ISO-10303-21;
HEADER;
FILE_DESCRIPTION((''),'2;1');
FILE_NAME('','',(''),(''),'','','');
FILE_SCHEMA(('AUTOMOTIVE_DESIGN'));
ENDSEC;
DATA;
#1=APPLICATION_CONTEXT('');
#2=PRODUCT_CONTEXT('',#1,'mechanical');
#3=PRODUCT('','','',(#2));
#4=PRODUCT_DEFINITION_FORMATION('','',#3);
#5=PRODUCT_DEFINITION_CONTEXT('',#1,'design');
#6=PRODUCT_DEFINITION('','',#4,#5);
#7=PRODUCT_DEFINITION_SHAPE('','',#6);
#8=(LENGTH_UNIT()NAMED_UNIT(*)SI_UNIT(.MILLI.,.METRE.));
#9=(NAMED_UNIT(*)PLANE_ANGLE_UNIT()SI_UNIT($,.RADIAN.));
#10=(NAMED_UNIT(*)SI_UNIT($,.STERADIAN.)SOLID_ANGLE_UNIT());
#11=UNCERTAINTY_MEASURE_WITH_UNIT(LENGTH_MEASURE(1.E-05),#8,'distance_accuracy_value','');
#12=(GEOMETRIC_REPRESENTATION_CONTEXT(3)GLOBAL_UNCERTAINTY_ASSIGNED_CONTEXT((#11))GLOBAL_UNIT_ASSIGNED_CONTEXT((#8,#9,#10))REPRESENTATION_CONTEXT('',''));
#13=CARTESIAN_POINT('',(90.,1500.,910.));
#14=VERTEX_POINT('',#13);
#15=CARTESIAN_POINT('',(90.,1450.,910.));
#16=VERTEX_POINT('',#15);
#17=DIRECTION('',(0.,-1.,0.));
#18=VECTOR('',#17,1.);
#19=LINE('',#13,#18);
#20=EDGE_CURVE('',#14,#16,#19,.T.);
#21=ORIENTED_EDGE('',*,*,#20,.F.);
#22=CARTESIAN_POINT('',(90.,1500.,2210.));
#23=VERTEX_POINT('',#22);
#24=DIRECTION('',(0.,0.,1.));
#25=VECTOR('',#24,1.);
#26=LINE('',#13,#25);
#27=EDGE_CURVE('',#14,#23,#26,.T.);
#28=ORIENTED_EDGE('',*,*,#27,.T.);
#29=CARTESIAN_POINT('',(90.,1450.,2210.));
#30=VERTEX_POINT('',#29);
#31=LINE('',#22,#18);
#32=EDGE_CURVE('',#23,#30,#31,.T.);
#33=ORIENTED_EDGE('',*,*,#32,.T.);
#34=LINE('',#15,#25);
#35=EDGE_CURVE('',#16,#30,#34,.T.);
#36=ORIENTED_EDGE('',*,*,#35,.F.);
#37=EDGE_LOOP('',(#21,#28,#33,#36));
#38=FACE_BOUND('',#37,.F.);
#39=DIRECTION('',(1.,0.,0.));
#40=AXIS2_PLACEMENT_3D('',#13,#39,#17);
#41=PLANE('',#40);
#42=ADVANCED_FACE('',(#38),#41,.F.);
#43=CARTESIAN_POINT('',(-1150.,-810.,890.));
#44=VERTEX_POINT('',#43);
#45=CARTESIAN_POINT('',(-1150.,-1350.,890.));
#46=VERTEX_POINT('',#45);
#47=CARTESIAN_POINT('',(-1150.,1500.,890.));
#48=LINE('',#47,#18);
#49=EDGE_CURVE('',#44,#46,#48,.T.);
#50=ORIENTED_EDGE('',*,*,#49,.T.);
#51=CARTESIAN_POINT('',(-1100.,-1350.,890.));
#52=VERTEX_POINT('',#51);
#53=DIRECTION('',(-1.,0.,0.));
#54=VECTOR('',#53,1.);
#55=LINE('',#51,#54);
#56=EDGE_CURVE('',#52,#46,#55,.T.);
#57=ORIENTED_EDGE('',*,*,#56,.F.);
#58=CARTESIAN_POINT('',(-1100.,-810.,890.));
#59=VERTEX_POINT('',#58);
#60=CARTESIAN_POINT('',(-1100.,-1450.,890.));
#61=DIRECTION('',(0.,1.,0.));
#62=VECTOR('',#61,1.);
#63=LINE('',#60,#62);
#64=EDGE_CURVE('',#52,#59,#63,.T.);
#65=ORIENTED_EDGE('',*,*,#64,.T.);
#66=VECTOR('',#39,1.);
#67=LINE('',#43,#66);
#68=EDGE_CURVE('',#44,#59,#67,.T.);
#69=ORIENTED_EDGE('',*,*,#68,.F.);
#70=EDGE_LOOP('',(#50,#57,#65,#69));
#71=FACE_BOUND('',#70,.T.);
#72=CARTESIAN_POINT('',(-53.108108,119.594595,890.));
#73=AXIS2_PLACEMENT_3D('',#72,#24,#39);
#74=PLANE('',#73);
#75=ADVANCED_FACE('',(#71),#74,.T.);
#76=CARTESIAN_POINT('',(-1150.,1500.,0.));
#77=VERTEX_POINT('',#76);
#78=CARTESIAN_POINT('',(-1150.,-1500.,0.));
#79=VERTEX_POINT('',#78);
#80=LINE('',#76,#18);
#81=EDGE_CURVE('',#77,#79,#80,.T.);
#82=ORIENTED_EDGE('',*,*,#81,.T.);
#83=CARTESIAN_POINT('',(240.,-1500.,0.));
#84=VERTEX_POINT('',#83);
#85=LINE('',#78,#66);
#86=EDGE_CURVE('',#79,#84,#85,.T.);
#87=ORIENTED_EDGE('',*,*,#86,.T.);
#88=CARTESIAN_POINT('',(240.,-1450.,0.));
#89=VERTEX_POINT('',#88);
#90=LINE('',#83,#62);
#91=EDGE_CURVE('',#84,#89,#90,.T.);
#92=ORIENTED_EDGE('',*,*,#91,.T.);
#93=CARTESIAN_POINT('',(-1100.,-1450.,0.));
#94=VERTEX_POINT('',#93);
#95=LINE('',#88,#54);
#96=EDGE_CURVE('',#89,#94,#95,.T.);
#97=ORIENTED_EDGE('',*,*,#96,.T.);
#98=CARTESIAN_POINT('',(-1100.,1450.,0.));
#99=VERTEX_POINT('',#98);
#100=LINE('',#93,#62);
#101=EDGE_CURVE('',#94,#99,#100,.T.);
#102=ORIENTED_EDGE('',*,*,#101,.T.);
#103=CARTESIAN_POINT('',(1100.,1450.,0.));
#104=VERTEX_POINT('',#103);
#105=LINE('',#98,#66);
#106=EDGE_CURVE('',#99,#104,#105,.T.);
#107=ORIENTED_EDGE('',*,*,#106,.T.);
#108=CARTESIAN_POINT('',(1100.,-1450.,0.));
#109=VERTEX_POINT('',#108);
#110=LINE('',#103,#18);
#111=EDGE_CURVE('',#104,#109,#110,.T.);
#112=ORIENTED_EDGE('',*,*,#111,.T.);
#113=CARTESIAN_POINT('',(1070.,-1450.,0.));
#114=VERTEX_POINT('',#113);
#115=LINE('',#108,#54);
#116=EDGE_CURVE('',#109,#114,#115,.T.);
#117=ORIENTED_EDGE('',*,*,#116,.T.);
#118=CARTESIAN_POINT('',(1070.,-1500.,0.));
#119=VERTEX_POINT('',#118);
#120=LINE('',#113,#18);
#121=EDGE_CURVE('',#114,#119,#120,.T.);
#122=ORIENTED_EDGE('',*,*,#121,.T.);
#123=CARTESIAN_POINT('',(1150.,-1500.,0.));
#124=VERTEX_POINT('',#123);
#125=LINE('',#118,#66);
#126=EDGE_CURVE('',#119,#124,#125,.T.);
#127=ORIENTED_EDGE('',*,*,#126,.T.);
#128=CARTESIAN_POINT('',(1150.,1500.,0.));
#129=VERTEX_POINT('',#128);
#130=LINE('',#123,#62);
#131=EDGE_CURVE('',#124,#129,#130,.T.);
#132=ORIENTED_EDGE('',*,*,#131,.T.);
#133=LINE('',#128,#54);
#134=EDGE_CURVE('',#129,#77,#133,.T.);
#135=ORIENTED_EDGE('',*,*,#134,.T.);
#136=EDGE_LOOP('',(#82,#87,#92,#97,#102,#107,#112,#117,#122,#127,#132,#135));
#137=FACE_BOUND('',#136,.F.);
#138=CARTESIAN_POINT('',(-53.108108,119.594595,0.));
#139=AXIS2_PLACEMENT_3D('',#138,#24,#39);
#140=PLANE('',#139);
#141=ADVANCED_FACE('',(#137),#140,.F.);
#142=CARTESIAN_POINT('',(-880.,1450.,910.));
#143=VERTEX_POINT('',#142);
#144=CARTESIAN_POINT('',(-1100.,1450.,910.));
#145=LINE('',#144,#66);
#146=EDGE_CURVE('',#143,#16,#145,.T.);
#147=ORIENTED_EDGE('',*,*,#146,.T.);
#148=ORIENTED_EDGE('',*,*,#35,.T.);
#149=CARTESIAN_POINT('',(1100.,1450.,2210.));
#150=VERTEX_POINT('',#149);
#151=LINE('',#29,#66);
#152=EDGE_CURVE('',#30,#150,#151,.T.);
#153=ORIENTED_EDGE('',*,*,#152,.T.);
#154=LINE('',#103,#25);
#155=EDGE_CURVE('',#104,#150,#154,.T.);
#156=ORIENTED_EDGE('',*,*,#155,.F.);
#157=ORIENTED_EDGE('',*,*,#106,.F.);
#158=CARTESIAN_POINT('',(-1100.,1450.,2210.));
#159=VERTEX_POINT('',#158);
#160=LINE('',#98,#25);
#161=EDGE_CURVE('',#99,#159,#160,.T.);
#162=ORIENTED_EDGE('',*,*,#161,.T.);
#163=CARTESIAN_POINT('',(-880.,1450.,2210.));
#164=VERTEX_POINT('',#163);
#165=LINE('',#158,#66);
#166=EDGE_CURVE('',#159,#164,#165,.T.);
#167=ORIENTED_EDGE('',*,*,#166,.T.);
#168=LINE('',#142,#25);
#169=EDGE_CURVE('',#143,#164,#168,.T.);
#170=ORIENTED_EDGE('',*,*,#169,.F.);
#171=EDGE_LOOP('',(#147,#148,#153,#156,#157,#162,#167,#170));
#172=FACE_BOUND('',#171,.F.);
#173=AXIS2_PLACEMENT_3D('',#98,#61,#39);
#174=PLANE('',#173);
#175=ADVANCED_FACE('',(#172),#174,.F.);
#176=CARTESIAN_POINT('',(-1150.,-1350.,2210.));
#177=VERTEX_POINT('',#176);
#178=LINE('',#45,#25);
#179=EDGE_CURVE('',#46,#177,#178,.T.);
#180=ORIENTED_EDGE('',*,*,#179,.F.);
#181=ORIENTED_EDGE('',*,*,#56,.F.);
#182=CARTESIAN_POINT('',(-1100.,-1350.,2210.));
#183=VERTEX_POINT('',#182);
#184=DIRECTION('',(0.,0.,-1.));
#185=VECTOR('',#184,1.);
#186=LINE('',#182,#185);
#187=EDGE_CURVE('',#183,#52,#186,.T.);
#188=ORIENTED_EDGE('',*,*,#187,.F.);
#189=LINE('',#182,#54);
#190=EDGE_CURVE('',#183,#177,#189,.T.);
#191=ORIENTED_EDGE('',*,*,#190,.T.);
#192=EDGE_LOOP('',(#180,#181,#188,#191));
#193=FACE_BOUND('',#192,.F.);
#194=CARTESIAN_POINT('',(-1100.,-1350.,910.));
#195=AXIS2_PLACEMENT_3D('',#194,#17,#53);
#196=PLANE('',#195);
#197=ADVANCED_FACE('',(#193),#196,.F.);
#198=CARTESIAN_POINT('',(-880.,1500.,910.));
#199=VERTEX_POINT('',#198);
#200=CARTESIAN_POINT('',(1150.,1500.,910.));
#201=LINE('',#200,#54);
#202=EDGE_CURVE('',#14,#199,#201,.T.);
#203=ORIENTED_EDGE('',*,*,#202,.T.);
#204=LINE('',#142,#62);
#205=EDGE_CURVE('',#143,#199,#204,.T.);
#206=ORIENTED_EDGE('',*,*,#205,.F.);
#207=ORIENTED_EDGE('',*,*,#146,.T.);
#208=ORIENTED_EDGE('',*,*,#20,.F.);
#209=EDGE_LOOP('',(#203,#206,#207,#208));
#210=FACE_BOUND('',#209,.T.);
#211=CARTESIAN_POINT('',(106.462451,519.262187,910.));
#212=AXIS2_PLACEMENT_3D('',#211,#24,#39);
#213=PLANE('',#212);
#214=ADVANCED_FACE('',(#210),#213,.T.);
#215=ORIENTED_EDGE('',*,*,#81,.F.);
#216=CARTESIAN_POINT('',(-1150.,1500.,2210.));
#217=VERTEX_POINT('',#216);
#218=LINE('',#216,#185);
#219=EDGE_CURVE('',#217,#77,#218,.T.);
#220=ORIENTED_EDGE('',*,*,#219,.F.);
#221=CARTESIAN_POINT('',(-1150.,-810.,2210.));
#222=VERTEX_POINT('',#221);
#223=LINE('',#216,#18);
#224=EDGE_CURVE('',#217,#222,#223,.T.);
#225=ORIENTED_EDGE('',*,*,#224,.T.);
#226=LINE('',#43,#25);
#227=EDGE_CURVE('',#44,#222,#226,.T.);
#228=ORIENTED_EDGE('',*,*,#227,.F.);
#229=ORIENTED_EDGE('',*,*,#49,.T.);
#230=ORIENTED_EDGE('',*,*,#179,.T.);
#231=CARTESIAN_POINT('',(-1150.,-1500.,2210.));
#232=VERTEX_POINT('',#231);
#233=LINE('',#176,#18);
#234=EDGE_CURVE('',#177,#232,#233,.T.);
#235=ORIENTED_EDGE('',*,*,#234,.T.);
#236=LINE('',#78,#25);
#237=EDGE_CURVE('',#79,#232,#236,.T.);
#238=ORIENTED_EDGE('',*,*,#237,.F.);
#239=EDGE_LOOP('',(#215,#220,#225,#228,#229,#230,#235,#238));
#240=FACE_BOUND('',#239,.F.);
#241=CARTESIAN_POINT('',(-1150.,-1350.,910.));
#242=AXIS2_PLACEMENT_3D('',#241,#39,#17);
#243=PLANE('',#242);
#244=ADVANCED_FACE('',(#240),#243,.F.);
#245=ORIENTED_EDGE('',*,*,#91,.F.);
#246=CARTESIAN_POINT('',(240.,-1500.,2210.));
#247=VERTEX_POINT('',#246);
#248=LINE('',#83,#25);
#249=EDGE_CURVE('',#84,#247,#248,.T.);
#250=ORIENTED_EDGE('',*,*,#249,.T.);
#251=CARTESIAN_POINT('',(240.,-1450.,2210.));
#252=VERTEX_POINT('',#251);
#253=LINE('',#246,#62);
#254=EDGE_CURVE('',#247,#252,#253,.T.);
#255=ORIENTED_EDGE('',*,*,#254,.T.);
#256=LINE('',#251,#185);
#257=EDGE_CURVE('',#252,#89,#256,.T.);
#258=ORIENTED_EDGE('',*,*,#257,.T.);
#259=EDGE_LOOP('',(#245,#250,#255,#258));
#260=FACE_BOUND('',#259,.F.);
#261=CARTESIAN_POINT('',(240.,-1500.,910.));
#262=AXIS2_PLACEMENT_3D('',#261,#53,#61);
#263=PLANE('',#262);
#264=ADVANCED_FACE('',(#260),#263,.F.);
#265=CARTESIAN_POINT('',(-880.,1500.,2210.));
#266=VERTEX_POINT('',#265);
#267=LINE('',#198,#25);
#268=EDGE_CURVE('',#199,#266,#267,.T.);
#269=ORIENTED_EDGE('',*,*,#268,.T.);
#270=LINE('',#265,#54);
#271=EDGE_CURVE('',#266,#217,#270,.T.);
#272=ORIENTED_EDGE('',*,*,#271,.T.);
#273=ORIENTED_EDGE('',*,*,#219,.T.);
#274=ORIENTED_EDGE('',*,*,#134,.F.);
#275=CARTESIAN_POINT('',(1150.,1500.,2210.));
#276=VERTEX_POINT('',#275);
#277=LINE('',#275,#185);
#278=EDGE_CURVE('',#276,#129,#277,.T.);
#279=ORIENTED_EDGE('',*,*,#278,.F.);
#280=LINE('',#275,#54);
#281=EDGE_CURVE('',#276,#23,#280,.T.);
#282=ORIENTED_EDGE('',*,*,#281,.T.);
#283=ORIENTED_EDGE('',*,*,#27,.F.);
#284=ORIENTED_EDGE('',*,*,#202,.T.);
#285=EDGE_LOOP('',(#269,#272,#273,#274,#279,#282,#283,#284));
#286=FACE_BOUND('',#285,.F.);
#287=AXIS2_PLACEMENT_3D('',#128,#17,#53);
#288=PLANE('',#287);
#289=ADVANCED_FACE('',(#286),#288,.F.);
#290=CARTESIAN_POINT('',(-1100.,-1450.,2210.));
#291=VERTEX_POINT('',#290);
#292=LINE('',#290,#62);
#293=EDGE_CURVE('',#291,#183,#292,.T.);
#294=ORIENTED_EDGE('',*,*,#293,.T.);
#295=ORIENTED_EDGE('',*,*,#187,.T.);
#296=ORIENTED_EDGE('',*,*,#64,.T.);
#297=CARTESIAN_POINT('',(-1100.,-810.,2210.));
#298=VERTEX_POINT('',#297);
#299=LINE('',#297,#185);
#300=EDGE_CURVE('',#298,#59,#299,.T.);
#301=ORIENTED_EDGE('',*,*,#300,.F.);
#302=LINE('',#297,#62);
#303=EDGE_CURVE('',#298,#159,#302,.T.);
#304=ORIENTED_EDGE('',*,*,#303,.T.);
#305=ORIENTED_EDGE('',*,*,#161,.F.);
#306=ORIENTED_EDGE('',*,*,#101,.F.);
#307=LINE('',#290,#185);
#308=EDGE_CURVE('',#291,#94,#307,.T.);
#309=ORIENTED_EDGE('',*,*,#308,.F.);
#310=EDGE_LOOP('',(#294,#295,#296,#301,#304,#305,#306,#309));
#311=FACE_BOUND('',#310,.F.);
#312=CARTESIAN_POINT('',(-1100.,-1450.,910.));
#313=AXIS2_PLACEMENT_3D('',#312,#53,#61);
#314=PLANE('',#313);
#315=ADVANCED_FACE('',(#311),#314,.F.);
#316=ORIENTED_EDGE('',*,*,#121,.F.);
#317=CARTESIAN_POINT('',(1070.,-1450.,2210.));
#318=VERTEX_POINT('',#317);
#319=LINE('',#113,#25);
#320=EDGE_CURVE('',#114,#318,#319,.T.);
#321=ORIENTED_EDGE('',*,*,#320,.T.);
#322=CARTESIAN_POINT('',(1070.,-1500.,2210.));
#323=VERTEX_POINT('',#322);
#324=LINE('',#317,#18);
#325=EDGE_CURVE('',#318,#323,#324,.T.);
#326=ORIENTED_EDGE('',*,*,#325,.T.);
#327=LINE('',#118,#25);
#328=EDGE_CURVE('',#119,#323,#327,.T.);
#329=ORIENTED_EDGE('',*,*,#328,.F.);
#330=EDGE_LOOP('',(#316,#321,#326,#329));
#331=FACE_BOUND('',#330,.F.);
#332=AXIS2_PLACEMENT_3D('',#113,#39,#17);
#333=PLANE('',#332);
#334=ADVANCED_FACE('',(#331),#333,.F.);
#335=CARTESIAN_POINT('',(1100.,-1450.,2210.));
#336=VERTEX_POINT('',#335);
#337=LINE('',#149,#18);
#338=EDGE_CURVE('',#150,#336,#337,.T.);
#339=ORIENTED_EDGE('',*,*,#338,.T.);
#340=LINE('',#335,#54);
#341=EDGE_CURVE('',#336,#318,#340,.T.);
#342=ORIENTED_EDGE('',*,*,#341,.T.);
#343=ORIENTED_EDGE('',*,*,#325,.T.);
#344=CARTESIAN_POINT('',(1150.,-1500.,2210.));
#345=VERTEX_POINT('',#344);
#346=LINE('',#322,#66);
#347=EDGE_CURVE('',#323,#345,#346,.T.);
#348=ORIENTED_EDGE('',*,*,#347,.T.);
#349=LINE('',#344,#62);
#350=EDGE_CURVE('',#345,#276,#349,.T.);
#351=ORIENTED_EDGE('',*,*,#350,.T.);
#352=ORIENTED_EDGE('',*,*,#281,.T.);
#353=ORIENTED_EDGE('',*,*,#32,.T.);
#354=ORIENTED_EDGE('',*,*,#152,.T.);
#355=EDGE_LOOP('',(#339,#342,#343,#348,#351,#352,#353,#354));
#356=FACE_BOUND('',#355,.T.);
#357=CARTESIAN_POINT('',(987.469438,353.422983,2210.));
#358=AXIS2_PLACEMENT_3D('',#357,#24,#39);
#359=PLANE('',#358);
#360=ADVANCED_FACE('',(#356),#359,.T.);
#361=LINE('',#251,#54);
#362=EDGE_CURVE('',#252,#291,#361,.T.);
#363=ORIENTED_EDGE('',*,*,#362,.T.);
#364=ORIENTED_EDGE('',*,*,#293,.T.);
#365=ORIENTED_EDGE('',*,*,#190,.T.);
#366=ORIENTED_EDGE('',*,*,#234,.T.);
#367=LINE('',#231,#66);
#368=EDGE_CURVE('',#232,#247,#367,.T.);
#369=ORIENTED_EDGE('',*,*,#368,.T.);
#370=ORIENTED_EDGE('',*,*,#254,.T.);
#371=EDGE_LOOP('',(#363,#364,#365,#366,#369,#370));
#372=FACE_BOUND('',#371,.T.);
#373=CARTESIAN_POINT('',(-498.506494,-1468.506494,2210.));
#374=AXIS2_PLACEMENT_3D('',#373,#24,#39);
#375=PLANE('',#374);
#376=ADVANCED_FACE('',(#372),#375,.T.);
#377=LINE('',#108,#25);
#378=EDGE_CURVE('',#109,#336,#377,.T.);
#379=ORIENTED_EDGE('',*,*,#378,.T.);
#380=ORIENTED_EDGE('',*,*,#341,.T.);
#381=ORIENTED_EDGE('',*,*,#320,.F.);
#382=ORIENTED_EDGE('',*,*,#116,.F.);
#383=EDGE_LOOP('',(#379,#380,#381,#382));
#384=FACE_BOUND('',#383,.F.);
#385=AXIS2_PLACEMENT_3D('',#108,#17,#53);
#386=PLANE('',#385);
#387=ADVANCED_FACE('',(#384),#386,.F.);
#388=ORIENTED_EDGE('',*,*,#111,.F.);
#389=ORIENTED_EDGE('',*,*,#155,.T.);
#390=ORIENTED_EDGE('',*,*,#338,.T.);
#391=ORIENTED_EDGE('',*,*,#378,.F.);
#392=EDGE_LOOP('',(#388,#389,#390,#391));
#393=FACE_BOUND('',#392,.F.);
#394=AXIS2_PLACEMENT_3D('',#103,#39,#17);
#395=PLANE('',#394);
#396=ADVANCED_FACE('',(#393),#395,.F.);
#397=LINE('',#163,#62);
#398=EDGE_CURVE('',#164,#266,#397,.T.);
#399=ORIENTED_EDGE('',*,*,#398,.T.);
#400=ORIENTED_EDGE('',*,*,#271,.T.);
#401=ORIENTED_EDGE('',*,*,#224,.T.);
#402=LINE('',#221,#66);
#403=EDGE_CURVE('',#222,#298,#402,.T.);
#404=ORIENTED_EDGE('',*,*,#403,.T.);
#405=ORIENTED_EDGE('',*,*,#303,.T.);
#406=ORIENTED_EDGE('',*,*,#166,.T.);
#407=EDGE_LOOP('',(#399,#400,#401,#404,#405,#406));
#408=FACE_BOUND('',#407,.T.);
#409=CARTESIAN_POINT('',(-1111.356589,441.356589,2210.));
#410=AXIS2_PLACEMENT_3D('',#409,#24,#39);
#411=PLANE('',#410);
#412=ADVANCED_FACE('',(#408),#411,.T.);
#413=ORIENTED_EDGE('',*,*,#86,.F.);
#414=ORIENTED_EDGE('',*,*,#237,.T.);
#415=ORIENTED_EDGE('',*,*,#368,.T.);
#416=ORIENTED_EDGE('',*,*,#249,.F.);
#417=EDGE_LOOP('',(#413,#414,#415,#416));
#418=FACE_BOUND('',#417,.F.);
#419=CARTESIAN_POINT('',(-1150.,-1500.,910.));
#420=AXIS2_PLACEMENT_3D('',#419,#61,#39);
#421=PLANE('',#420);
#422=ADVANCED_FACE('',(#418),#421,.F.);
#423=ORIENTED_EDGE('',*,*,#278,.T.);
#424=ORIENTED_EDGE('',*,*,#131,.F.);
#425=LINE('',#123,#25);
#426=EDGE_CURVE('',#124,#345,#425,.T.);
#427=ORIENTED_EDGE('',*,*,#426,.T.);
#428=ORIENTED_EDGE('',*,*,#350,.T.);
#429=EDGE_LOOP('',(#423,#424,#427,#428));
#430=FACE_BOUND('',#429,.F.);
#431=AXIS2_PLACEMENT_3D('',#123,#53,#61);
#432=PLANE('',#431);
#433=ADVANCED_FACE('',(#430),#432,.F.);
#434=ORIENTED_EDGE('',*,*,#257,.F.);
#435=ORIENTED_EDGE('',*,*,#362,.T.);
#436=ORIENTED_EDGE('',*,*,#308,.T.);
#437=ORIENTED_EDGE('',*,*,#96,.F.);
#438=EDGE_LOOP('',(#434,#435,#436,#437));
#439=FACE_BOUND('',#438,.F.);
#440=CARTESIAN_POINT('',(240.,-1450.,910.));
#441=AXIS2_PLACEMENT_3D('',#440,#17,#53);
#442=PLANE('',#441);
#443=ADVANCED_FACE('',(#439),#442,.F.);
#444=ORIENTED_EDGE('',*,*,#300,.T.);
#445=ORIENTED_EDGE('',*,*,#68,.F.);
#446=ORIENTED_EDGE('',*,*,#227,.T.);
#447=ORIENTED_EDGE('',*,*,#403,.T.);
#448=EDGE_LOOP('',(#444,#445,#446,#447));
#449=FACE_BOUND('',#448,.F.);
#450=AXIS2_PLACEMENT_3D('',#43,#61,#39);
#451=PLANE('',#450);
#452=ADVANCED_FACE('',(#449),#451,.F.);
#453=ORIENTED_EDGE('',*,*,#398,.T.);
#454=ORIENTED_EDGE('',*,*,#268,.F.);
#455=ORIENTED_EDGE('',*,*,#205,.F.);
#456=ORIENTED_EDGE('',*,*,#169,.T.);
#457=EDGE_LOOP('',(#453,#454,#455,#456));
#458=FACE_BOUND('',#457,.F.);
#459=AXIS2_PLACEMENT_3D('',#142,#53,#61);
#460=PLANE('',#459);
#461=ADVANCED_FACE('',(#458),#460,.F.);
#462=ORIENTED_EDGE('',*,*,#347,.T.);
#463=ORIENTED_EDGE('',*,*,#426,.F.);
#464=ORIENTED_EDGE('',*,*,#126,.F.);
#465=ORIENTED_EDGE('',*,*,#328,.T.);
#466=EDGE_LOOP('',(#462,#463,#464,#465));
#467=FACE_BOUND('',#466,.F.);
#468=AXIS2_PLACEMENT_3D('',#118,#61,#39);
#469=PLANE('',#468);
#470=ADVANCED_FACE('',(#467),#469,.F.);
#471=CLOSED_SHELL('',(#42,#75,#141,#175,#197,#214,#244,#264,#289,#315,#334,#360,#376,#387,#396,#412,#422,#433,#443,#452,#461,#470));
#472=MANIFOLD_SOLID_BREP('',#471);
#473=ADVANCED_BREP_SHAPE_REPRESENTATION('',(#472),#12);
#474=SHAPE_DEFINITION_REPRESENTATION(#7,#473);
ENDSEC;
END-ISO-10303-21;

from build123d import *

# Parameters (mm, degrees)
F1_DEPTH = 890
F3_DEPTH = 20
F5_DEPTH = 1300


with BuildPart() as f1:
    # F0 (on Top) → F1 (new body)
    with BuildSketch(Plane.XY):
        Polygon((1100, 1450), (1100, -1450), (1070, -1450), (1070, -1500), (1150, -1500), (1150, 1500), (-1150, 1500), (-1150, -1500), (240, -1500), (240, -1450), (-1100, -1450), (-1100, 1450), align=None)
    extrude(amount=F1_DEPTH)

    # F2 (on face) → F3 (join)
    with BuildSketch(Plane.XY.offset(890)):
        Polygon((-1100, -1350), (-1150, -1350), (-1150, -1500), (240, -1500), (240, -1450), (-1100, -1450), align=None)
        Polygon((-1150, 1500), (-1150, -810), (-1100, -810), (-1100, 1450), (1100, 1450), (1100, -1450), (1070, -1450), (1070, -1500), (1150, -1500), (1150, 1500), align=None)
    extrude(amount=F3_DEPTH)

    # F3_face (on face) + F4 (on face) → F5 (join)
    with BuildSketch(Plane(origin=(107.2679045093, 530.198938992, 910), x_dir=(1, 0, 0), z_dir=(0, 0, 1))):
        Polygon((-1207.2679045093, -1880.198938992), (-1257.2679045093, -1880.198938992), (-1257.2679045093, -2030.198938992), (132.7320954907, -2030.198938992), (132.7320954907, -1980.198938992), (-1207.2679045093, -1980.198938992), align=None)
    with BuildSketch(Plane.XY.offset(910)):
        Polygon((-880, 1450), (-880, 1500), (-1150, 1500), (-1150, -810), (-1100, -810), (-1100, 1450), align=None)
        Polygon((1150, 1500), (90, 1500), (90, 1450), (1100, 1450), (1100, -1450), (1070, -1450), (1070, -1500), (1150, -1500), align=None)
    extrude(amount=F5_DEPTH)


solid = f1.part
